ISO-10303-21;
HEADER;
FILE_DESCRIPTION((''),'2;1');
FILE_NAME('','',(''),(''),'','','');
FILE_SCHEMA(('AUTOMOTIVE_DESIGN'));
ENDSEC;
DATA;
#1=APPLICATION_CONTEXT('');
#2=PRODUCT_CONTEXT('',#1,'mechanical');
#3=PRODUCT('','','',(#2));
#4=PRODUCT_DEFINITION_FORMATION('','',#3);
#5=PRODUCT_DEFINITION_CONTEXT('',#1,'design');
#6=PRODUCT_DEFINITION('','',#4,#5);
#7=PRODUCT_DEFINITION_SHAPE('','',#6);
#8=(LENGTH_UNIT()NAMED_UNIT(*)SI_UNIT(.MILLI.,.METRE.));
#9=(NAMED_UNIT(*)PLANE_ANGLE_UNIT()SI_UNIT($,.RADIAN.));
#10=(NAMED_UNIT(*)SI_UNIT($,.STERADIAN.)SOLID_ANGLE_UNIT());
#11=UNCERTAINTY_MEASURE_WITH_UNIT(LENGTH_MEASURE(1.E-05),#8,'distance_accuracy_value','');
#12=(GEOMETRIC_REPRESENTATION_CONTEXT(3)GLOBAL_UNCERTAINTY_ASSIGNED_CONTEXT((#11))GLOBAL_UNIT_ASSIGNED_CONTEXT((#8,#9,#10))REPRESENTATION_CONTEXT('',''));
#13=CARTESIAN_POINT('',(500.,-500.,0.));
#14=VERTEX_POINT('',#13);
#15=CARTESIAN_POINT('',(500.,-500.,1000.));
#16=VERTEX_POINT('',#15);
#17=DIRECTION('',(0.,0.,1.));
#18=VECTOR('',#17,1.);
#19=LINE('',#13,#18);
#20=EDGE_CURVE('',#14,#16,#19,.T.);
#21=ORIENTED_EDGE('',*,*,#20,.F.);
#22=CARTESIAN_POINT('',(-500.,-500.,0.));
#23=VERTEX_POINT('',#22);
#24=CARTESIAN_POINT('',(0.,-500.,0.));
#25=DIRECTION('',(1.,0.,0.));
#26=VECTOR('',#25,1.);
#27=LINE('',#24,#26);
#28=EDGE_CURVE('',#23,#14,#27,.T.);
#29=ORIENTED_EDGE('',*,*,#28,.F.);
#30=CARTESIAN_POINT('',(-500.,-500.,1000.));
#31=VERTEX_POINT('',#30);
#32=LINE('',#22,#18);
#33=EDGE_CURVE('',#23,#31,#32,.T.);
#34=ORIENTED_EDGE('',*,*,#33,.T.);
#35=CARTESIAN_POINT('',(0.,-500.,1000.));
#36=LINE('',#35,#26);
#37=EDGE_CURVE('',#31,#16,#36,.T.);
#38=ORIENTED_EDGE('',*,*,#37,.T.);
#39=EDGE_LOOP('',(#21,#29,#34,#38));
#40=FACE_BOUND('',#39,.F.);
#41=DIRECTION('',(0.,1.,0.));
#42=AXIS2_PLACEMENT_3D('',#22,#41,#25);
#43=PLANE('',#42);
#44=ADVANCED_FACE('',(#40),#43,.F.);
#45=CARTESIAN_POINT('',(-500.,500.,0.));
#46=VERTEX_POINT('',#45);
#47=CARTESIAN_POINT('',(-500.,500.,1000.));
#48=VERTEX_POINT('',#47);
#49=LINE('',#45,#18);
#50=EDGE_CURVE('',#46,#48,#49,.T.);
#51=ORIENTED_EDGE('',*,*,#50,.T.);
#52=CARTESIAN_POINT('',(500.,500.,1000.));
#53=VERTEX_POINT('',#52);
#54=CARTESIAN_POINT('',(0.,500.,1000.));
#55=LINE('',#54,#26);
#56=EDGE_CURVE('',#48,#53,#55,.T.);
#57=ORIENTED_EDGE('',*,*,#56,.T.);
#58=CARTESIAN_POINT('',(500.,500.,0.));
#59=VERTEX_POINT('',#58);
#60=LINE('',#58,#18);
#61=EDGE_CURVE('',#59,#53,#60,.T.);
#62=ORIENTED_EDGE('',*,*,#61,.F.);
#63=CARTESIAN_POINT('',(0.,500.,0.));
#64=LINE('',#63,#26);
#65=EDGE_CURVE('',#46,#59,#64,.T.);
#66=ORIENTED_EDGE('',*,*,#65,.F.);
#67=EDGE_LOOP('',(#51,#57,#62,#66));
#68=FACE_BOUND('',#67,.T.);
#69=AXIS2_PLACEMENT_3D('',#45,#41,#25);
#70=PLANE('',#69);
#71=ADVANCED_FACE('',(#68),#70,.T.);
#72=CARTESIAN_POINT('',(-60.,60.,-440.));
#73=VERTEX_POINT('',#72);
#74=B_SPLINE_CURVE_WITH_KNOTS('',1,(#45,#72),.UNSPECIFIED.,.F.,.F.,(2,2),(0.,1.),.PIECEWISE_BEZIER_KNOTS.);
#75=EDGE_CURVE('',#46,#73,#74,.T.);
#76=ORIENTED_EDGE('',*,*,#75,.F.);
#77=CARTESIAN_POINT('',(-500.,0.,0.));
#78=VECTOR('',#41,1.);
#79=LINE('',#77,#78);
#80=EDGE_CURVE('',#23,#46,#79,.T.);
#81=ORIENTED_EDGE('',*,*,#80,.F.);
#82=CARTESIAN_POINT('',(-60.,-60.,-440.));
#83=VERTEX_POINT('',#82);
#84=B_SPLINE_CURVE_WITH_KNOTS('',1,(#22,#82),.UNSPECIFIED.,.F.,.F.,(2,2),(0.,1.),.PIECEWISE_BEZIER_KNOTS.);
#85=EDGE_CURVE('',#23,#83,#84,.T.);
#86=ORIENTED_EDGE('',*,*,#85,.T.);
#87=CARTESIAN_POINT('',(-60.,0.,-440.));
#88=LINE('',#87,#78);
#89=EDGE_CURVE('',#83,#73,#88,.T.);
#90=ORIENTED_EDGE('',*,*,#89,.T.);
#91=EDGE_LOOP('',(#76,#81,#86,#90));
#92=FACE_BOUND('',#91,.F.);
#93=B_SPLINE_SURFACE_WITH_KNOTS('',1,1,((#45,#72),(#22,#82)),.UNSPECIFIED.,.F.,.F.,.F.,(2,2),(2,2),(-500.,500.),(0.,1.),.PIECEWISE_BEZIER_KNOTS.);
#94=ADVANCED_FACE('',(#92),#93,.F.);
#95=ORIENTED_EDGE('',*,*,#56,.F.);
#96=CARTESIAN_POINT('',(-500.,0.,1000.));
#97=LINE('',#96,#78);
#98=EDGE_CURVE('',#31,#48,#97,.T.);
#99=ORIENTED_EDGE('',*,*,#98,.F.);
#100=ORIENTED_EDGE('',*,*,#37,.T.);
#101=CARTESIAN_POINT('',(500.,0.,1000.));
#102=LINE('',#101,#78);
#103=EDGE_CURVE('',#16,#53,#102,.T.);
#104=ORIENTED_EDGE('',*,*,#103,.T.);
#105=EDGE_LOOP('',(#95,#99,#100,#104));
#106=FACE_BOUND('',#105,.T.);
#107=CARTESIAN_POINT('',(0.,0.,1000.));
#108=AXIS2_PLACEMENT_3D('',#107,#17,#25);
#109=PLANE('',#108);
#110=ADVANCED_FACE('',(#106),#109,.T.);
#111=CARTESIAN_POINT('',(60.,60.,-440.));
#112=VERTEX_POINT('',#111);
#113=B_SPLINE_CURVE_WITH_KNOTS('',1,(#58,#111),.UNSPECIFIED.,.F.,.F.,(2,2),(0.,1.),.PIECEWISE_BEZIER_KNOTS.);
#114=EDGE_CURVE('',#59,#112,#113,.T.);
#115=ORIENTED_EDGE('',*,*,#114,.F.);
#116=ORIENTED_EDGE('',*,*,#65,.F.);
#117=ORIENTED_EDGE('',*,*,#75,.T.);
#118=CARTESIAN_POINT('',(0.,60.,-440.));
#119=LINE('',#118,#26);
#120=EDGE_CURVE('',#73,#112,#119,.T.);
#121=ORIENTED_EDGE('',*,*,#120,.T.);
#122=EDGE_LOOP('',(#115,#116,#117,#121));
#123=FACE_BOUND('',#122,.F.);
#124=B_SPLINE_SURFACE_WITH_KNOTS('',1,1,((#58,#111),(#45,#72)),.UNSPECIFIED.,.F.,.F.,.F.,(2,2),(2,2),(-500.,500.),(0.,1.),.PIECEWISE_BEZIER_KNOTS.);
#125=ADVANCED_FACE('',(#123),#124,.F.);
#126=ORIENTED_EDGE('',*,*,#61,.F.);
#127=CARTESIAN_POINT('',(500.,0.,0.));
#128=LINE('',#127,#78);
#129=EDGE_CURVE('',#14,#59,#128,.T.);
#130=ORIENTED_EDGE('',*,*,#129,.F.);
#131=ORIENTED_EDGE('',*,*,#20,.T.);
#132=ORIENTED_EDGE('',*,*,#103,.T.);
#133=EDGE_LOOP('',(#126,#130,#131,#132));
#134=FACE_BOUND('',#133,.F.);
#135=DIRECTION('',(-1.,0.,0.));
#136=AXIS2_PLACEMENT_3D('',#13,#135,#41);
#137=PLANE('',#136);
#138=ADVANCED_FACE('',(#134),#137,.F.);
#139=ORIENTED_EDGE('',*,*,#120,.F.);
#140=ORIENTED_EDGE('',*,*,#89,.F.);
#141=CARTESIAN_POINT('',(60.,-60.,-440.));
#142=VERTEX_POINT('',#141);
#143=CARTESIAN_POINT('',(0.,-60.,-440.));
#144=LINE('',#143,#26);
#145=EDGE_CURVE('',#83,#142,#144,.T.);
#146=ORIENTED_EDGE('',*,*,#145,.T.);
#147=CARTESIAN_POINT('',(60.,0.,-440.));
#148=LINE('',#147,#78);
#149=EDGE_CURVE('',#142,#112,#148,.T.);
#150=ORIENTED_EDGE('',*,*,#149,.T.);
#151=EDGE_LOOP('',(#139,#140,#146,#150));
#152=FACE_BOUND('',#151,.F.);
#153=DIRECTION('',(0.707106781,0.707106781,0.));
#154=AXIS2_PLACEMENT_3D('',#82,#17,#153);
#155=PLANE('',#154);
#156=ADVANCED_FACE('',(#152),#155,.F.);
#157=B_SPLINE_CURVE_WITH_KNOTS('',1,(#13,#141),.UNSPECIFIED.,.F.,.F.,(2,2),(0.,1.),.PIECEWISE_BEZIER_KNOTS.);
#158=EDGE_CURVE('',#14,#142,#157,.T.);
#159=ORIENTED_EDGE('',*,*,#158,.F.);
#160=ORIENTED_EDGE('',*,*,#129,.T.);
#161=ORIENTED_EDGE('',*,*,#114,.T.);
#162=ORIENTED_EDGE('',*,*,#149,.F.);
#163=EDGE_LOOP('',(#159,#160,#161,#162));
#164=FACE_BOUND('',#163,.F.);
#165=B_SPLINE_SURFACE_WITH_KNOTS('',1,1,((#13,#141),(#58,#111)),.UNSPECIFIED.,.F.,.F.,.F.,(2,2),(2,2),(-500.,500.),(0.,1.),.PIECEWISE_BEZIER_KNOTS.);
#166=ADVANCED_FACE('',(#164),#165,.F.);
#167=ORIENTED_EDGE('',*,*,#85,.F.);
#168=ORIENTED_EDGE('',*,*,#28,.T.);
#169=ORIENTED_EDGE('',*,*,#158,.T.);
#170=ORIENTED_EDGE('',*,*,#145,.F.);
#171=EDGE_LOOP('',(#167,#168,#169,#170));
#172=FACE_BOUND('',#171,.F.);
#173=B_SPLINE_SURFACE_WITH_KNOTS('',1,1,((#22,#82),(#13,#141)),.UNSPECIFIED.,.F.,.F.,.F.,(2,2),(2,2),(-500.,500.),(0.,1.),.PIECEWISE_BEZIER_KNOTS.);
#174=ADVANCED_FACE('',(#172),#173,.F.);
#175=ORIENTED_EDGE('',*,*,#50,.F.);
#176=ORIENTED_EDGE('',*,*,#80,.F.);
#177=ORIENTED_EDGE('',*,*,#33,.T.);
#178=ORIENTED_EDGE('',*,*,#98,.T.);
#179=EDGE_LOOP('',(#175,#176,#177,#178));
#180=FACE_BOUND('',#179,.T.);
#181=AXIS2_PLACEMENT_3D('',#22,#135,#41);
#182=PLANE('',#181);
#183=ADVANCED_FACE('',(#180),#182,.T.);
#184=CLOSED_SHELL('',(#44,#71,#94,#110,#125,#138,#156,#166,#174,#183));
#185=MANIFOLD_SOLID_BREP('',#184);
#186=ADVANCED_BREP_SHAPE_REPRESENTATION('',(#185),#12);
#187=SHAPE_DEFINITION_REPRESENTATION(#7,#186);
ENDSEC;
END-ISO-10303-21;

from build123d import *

# Parameters (mm, degrees)
F0_W          = 1000
F0_H          = 1000
F1_DEPTH      = 1000
F1_DEPTH_BACK = 440
F1_TAPER_BACK = 45


with BuildPart() as f1:
    # F0 (on Top) → F1 (new body, two sides)
    with BuildSketch(Plane.XY) as f1_sk:
        Rectangle(F0_W, F0_H)
    extrude(amount=F1_DEPTH)
    extrude(f1_sk.sketch, amount=-F1_DEPTH_BACK, taper=F1_TAPER_BACK)


solid = f1.part
